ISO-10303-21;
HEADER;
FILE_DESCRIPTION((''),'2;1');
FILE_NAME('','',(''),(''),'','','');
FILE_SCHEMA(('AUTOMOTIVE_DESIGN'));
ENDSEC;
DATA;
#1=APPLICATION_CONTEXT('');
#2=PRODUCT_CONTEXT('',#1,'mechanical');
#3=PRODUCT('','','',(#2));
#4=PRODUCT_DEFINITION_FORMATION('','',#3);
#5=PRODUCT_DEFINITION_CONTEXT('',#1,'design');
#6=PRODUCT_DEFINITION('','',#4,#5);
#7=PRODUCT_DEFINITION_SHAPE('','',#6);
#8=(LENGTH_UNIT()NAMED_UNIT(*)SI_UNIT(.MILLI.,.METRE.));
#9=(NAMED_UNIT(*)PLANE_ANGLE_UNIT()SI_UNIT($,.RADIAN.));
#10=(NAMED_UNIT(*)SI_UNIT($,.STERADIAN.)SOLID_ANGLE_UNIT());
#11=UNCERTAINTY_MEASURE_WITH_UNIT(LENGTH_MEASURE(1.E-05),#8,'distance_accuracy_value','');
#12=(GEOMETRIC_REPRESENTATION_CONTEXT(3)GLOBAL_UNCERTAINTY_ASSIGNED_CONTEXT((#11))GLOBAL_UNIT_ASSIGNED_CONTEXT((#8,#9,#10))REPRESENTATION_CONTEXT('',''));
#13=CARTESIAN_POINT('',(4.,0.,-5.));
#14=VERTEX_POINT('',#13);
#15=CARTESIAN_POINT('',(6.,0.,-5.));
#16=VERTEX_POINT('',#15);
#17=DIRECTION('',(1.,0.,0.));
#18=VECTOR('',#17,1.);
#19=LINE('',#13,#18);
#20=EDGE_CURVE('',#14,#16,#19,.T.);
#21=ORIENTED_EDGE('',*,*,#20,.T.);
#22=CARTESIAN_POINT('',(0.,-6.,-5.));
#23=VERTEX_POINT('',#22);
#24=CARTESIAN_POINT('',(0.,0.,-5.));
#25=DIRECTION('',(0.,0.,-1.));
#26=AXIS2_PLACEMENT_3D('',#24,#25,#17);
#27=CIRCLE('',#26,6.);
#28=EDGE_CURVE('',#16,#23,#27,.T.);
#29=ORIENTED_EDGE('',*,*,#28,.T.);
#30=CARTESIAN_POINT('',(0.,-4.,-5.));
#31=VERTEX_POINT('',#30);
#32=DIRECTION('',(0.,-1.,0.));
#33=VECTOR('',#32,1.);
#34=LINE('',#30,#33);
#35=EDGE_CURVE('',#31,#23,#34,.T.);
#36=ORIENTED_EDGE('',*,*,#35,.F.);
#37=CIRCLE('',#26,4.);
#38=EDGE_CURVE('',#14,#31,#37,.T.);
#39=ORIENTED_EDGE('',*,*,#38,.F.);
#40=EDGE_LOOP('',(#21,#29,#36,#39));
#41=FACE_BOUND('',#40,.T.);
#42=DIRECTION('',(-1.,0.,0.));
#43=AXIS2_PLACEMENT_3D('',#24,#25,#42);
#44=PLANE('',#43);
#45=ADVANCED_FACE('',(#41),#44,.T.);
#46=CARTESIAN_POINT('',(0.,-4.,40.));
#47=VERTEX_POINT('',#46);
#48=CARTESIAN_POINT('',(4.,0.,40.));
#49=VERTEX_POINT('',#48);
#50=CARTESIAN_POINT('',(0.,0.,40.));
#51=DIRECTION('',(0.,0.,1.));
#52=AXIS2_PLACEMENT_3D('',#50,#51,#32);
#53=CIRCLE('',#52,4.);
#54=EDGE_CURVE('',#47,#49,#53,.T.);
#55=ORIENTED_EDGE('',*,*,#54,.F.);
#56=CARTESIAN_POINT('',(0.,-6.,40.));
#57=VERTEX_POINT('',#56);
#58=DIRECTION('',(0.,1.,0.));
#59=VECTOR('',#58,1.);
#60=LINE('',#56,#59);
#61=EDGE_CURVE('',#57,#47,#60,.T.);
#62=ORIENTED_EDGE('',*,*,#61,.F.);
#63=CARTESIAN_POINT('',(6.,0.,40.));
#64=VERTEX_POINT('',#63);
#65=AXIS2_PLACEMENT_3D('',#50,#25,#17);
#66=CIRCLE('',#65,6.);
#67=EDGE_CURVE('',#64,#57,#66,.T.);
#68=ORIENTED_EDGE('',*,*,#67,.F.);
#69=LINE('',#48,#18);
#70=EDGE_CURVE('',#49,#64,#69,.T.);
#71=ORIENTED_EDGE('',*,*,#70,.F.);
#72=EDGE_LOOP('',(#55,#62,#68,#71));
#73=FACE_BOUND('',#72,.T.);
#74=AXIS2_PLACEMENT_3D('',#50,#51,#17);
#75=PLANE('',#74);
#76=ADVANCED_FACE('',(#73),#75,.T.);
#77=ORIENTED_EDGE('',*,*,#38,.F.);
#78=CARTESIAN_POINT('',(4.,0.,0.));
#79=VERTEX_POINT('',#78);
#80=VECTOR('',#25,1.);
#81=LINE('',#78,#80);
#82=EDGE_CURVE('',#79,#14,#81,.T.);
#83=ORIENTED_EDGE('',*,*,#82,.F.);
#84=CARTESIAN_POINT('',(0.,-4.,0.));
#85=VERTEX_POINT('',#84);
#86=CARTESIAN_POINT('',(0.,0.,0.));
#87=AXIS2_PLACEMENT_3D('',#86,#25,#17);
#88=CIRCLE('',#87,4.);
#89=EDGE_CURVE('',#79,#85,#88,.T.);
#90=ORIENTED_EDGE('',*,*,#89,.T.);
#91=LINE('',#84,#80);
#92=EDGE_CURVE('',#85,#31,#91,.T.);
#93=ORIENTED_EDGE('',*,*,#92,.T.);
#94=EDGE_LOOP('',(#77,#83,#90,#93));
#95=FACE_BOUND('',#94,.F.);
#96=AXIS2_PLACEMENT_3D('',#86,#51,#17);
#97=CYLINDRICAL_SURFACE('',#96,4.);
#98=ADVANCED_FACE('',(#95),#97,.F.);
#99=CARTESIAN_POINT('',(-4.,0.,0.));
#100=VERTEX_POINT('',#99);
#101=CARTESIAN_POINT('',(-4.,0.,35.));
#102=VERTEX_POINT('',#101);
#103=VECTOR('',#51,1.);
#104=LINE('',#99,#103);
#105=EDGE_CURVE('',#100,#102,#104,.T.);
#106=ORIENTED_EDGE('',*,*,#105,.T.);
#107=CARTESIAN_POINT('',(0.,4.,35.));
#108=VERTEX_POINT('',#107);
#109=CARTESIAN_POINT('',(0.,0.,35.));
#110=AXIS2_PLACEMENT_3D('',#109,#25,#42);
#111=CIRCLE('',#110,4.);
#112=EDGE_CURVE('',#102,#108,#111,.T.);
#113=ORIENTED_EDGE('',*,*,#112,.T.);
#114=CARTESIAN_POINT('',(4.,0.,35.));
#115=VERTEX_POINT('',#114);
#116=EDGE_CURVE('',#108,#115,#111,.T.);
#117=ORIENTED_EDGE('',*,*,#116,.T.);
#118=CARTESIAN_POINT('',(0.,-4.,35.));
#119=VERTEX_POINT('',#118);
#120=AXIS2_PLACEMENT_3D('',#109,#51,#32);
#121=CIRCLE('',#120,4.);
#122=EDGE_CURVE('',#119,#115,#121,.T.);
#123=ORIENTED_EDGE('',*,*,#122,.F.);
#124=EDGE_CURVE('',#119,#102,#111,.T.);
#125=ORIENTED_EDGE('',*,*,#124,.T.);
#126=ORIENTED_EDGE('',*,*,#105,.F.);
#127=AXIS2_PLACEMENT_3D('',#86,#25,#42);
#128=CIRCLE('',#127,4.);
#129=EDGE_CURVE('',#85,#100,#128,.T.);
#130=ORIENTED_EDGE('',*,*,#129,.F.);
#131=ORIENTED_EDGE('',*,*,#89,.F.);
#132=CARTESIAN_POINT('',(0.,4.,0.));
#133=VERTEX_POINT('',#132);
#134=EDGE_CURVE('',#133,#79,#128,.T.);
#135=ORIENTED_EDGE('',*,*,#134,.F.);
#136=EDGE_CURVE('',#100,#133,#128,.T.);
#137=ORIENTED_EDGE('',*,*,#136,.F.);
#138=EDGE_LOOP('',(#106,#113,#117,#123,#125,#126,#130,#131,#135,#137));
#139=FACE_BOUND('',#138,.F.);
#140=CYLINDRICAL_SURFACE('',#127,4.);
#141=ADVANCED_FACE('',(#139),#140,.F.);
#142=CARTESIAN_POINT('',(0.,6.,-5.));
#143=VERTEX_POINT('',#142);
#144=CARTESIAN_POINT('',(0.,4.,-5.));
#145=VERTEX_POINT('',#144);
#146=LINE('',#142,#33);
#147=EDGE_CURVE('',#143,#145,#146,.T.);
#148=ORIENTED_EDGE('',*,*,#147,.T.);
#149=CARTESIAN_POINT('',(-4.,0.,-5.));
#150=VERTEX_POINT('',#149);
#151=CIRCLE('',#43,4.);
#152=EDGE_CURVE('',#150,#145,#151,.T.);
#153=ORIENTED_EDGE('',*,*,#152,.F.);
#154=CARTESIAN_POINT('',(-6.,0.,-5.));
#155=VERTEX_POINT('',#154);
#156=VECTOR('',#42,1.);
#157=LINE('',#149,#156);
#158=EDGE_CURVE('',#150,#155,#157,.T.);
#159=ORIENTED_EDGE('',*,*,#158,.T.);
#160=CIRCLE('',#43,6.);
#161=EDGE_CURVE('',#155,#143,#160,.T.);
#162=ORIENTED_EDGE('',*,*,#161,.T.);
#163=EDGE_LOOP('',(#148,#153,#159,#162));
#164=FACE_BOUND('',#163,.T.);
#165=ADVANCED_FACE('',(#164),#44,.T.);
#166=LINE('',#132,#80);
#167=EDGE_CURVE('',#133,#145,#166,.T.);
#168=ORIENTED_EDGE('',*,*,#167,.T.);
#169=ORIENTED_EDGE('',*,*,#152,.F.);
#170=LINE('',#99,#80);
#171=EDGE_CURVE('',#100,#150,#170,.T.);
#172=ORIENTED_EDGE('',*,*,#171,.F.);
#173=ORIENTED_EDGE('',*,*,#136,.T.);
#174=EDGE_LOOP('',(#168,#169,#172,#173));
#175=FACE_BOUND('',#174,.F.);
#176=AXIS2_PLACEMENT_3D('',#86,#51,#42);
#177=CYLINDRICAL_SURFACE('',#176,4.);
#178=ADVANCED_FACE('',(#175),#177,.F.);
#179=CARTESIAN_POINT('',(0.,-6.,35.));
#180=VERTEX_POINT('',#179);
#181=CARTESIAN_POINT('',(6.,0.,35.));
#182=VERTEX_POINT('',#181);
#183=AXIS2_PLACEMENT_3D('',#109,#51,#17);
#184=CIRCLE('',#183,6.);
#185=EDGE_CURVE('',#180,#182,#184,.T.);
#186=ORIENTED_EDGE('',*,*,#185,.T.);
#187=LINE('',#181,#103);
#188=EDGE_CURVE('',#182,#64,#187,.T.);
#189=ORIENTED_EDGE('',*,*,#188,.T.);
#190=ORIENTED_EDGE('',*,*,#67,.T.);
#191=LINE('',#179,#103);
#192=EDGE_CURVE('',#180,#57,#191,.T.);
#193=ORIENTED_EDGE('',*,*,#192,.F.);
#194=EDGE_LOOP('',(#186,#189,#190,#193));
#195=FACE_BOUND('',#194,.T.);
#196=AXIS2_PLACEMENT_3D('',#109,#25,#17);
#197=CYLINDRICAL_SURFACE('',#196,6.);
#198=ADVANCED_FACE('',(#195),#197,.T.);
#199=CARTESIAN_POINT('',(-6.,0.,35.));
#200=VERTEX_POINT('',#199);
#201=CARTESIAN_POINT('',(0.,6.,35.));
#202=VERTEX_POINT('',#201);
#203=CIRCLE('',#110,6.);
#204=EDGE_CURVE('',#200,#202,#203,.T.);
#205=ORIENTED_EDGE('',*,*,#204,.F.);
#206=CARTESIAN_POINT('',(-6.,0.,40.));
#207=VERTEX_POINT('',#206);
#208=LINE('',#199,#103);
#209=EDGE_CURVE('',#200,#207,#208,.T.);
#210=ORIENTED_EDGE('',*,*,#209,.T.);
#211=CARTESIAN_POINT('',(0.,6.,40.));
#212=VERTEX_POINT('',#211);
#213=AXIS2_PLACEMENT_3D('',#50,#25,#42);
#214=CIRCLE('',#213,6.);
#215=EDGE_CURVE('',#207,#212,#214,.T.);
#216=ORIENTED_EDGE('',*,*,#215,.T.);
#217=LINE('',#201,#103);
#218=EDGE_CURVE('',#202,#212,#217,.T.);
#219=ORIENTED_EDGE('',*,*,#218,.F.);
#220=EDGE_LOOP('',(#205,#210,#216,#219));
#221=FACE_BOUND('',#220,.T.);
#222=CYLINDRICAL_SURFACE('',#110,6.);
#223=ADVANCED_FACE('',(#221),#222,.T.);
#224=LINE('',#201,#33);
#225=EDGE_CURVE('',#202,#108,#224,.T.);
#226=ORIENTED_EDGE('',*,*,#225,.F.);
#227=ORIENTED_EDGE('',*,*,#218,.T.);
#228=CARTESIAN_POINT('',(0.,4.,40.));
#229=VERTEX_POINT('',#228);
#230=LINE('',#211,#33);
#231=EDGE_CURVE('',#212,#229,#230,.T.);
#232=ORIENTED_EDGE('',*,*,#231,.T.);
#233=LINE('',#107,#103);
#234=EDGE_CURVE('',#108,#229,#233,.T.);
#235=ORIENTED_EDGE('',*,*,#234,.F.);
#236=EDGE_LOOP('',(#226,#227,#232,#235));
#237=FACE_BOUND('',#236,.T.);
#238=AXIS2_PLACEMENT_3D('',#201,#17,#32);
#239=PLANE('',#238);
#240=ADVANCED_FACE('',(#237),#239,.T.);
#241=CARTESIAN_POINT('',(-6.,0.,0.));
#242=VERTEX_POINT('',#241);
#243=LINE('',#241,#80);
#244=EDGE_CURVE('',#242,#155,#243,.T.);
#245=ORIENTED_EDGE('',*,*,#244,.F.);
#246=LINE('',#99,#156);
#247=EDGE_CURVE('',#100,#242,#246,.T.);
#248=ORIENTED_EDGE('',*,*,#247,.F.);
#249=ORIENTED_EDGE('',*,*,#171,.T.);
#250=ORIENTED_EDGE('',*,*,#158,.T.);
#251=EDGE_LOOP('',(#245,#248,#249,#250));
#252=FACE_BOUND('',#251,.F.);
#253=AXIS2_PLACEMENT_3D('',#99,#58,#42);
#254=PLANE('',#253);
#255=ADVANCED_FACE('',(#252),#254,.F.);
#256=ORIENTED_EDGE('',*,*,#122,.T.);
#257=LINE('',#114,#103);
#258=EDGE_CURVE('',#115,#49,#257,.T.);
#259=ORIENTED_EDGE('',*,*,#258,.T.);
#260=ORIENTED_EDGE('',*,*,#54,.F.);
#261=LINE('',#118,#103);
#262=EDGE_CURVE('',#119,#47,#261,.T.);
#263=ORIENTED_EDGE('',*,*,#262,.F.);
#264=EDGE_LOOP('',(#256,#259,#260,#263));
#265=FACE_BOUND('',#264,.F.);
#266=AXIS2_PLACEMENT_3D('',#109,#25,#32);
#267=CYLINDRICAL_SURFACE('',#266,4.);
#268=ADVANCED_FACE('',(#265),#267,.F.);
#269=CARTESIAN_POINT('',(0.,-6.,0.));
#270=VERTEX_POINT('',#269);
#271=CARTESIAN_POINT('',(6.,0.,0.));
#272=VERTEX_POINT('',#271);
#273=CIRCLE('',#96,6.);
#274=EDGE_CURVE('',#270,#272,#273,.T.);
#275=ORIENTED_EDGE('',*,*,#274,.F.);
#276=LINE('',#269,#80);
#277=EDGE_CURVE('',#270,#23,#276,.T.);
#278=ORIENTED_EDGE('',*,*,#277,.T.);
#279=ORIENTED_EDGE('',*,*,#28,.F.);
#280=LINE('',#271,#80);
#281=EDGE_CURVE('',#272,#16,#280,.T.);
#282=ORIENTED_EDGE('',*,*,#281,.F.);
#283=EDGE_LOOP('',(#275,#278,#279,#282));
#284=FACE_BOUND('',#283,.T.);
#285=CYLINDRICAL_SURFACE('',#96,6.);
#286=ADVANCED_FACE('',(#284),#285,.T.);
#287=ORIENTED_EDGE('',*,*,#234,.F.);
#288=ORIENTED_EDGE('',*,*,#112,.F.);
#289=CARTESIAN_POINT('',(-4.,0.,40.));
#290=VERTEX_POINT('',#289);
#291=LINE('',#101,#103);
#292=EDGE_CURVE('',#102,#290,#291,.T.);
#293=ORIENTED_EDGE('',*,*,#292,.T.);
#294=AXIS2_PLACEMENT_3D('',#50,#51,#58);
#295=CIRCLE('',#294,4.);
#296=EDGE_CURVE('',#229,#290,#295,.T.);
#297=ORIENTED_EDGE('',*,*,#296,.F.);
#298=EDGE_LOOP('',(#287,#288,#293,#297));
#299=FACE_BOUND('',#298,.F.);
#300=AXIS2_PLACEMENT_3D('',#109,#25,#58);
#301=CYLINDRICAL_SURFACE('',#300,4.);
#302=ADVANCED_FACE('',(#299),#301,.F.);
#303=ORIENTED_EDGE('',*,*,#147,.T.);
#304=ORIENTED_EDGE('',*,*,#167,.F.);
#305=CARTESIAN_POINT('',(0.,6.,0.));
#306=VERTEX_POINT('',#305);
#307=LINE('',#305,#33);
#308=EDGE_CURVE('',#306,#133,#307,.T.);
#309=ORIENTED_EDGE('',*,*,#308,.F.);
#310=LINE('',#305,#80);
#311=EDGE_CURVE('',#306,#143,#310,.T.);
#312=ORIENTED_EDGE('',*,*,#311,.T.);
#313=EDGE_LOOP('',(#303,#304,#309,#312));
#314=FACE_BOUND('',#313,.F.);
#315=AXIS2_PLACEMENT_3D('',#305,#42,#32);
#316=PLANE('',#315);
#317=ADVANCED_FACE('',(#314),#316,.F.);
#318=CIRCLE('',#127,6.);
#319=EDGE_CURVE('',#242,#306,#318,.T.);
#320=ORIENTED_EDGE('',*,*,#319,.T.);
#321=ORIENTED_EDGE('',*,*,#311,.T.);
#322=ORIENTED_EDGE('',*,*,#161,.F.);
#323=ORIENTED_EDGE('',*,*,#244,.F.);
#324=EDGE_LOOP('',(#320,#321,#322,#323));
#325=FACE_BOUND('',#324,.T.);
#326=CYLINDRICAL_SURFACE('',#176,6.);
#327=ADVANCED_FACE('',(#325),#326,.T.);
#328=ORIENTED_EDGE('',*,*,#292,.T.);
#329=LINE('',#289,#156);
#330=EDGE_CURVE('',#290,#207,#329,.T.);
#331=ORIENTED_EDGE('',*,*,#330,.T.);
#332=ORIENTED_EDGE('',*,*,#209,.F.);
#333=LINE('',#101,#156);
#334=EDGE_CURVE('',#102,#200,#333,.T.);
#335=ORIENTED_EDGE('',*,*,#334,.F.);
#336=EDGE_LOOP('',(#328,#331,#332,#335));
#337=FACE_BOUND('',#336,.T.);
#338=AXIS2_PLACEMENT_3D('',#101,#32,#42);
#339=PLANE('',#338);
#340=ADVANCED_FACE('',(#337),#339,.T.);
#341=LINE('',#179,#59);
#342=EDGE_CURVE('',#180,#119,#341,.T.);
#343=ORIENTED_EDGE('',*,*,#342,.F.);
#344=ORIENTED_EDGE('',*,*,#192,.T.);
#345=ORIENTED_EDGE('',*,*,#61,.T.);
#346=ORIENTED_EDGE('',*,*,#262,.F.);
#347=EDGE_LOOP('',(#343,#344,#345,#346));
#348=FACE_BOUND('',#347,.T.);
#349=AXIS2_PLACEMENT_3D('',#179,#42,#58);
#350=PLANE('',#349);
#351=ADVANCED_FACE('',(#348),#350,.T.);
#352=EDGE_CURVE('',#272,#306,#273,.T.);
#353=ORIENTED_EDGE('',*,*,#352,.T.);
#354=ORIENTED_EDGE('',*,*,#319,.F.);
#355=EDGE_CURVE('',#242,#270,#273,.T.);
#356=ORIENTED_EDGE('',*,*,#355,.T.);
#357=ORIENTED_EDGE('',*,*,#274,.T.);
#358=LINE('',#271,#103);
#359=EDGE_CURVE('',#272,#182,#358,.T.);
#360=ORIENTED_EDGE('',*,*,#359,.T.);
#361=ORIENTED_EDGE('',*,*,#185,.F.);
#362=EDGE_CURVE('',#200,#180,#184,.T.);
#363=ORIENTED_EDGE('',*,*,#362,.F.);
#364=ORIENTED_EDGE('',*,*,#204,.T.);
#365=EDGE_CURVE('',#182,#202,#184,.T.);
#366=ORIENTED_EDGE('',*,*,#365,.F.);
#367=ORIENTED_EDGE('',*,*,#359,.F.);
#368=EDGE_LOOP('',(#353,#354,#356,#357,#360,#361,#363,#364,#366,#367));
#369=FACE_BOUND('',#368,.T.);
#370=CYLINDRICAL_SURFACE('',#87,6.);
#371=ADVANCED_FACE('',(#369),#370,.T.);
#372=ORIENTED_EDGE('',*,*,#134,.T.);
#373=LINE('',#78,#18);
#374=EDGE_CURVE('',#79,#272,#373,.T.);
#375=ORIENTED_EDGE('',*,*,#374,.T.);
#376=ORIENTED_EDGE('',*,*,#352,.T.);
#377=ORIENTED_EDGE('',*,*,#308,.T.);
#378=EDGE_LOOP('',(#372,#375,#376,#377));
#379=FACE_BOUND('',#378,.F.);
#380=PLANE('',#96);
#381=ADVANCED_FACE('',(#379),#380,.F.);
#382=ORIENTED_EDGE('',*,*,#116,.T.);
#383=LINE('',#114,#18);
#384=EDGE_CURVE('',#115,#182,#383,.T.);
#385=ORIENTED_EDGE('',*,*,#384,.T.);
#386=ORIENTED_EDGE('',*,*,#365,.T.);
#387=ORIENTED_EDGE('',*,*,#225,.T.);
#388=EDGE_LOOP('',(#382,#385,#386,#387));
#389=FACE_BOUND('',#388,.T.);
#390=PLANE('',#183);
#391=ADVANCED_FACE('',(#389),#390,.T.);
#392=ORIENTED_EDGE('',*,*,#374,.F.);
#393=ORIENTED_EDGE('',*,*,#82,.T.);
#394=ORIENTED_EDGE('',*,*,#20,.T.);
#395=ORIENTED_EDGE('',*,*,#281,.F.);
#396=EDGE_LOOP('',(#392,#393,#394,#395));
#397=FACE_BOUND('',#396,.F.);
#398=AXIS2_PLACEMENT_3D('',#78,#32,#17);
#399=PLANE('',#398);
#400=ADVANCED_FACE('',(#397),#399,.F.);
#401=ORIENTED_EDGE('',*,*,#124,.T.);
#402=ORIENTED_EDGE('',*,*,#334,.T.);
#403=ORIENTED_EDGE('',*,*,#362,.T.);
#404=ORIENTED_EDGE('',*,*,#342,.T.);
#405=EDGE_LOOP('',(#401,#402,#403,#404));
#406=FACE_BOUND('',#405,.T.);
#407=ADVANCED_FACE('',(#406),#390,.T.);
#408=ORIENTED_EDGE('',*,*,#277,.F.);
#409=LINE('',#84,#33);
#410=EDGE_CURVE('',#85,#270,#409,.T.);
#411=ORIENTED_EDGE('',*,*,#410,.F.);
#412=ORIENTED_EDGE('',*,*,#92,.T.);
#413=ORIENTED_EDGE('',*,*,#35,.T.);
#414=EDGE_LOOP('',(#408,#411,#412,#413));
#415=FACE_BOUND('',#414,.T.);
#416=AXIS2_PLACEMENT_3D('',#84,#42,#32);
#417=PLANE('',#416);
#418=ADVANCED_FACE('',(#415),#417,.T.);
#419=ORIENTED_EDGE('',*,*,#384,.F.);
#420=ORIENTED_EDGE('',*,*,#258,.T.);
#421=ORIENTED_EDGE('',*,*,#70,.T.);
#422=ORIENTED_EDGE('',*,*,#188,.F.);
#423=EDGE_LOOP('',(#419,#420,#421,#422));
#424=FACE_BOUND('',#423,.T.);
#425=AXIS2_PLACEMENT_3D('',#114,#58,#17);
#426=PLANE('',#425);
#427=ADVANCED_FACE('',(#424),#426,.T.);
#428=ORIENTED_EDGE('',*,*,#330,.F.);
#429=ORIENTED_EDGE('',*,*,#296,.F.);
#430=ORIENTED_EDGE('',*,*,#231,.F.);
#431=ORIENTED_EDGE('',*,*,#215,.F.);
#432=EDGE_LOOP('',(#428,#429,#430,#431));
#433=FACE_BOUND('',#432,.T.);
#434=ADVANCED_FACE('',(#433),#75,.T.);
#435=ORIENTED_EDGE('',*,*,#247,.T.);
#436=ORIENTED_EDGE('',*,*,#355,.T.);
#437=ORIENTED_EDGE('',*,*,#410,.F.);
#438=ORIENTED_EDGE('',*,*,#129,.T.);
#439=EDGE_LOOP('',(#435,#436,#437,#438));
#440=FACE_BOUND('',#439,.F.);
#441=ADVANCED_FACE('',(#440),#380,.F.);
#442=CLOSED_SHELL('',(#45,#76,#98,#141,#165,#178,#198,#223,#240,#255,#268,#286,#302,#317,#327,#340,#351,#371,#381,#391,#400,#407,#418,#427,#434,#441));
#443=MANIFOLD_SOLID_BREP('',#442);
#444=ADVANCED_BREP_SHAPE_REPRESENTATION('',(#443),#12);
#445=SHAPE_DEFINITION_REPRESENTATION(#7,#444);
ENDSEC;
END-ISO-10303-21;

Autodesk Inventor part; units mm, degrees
ref_plane "YZ Plane" through (0, 0, 0) normal (1, 0, 0) x (0, 1, 0)
ref_plane "XZ Plane" through (0, 0, 0) normal (0, 1, 0) x (-1, 0, 0)
ref_plane "XY Plane" through (0, 0, 0) normal (0, 0, 1) x (1, 0, 0)
sketch "Skizze1" plane through (0, 0, 0) normal (0, 0, 1) x (1, 0, 0)
  circle A0 centre (0, 0) radius 6
  dimension "d0" = 12
extrude "Extrusion1" add sketch "Skizze1" along normal blind 35
sketch "Skizze2" plane through (0, 0, 0) normal (0, 0, -1) x (-1, 0, 0)
  circle A0 centre (0, 0) radius 4
  dimension "d3" = 8
extrude "Extrusion2" cut sketch "Skizze2" against normal blind 35
sketch "Skizze9" plane through (0, 0, 35) normal (0, 0, 1) x (1, 0, 0)
  arc A0 (0, 6) -> (-6, 0) centre (0, 0) ccw
  arc A1 (0, 4) -> (-4, 0) centre (0, 0) ccw
  line L0 (0, 4) -> (0, 6)
  line L1 (4, 0) -> (6, 0)
  line L2 (-4, 0) -> (-6, 0)
  arc A2 (0, -6) -> (6, 0) centre (0, 0) ccw
  arc A3 (0, -4) -> (4, 0) centre (0, 0) ccw
  line L3 (0, -4) -> (0, -6)
sketch "Skizze9 outline for Extrusion8" plane through (0, 0, 35) normal (0, 0, 1) x (1, 0, 0)
  line L0 (0, 6) -> (0, 4)
  arc A0 (0, 4) -> (-4, 0) centre (0, 0) ccw
  line L1 (-4, 0) -> (-6, 0)
  arc A1 (-6, 0) -> (0, 6) centre (0, 0) cw
  line L2 (4, 0) -> (6, 0)
  arc A2 (6, 0) -> (0, -6) centre (0, 0) cw
  line L3 (0, -6) -> (0, -4)
  arc A3 (0, -4) -> (4, 0) centre (0, 0) ccw
extrude "Extrusion8" add sketch "Skizze9 outline for Extrusion8" along normal blind 5
sketch "Skizze10" plane through (0, 0, 0) normal (0, 0, -1) x (-1, 0, 0)
  line L0 (0, -4) -> (0, -6) projected
  line L1 (-4, 0) -> (-6, 0) projected
  line L2 (-6, 0) -> (-4, 0)
  line L3 (0, 6) -> (0, 4) projected
  line L4 (0, -4) -> (0, -6)
  line L5 (-4, 0) -> (-6, 0)
  arc A0 (-6, 0) -> (0, -6) centre (0, 0) ccw
  arc A1 (6, 0) -> (0, 6) centre (0, 0) ccw
  arc A2 (4, 0) -> (0, 4) centre (0, 0) ccw
  line L6 (4, 0) -> (6, 0) projected
  line L7 (6, 0) -> (4, 0)
  arc A3 (-4, 0) -> (0, -4) centre (0, 0) ccw
extrude "Extrusion9" add sketch "Skizze10" along normal blind 5
properties part number "Steckhülse"
